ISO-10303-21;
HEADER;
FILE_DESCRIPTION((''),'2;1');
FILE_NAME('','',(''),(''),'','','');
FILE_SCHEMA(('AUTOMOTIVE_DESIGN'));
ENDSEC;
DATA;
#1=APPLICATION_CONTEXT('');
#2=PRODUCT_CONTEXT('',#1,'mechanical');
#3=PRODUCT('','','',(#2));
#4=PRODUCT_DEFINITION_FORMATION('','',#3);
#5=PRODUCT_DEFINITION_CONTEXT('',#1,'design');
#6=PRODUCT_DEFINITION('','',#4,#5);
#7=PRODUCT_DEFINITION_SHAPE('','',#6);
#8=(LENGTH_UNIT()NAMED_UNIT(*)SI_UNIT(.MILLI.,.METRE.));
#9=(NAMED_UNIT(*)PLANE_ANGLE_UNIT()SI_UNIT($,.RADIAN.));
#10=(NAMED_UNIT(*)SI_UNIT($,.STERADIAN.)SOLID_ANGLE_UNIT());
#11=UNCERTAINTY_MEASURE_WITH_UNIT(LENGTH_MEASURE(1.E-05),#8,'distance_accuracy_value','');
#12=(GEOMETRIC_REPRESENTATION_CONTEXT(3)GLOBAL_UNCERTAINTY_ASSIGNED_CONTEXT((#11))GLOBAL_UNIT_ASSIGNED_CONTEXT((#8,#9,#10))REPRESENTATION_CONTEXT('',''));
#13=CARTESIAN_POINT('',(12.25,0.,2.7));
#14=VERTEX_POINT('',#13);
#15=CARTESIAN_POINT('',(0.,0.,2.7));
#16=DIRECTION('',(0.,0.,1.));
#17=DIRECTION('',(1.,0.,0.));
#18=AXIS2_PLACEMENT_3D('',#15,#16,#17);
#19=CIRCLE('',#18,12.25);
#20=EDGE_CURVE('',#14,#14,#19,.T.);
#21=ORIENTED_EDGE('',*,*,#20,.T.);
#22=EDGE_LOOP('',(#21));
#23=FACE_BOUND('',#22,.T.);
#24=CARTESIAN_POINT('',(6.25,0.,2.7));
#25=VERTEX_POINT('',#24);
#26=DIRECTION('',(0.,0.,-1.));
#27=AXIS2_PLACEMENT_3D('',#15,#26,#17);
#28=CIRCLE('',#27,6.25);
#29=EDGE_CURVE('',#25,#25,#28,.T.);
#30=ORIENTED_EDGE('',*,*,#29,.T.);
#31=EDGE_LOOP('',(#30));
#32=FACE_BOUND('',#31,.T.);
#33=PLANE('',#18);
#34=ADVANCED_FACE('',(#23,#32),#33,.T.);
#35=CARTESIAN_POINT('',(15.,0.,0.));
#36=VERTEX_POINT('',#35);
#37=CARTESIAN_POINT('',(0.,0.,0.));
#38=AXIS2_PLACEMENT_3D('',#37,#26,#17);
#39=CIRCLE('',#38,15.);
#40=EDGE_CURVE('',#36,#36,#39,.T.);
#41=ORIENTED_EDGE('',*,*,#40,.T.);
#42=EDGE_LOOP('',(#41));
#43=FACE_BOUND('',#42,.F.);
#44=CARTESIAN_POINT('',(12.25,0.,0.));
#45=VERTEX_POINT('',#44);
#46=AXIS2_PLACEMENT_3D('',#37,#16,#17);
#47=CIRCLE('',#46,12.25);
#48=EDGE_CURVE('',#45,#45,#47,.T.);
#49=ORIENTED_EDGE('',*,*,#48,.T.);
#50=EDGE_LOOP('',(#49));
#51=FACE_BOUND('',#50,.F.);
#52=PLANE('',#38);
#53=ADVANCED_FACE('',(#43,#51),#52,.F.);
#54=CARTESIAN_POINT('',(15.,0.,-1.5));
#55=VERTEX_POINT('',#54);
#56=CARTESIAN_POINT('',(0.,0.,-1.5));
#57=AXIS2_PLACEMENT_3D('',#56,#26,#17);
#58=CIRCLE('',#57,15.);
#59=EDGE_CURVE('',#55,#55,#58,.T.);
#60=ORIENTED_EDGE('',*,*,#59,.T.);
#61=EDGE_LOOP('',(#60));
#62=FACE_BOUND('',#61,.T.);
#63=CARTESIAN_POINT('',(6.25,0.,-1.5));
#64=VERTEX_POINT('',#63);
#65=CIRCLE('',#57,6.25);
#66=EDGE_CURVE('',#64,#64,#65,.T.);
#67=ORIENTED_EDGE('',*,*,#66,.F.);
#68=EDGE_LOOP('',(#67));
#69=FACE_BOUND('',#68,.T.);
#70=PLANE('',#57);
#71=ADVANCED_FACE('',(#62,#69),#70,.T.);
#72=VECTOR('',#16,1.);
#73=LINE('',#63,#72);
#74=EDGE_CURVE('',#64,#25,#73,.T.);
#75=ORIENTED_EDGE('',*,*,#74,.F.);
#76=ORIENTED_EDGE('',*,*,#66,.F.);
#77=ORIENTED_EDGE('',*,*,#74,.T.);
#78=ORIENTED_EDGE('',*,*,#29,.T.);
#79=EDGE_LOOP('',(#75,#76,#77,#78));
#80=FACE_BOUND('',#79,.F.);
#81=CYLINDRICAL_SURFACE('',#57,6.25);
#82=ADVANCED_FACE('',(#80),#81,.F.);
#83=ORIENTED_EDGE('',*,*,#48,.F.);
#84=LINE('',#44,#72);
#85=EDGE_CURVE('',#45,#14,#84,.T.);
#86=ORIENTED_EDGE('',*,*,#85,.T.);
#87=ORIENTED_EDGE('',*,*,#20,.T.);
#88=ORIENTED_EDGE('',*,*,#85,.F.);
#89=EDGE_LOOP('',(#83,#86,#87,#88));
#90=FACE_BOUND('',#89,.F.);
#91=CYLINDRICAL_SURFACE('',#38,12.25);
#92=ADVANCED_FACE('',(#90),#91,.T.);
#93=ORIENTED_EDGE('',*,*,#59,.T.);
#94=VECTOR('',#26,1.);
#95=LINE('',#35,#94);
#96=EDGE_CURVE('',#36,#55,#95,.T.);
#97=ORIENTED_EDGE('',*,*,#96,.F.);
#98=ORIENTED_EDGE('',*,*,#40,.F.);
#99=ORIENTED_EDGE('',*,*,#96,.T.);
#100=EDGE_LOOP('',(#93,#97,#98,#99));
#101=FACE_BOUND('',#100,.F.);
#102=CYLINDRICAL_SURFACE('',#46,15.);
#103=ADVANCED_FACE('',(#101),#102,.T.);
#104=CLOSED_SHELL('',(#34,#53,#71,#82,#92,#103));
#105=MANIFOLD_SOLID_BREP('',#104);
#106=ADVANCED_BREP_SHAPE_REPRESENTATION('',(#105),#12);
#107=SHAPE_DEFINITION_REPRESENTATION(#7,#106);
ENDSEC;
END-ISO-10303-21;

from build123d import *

# Parameters (mm, degrees)
F0_R     = 12.25
F1_DEPTH = 2.7
F2_R     = 15
F2_R_2   = 12.25
F3_DEPTH = 1.5
F4_R     = 6.25
F5_DEPTH = 10


with BuildPart() as f1:
    # F0 (on Top) → F1 (new body)
    with BuildSketch(Plane.XY):
        Circle(F0_R)
    extrude(amount=F1_DEPTH)

    # F2 (on face) → F3 (join)
    with BuildSketch(Plane(origin=(0, 0, 0), x_dir=(1, 0, 0), z_dir=(0, 0, -1))):
        Circle(F2_R)
        Circle(F2_R_2, mode=Mode.SUBTRACT)
        Circle(F2_R_2)
    extrude(amount=F3_DEPTH)

    # F4 (on face) → F5 (cut)
    with BuildSketch(Plane(origin=(0, 0, -1.5), x_dir=(1, 0, 0), z_dir=(0, 0, -1))):
        Circle(F4_R)
    extrude(amount=-F5_DEPTH, mode=Mode.SUBTRACT)


solid = f1.part
